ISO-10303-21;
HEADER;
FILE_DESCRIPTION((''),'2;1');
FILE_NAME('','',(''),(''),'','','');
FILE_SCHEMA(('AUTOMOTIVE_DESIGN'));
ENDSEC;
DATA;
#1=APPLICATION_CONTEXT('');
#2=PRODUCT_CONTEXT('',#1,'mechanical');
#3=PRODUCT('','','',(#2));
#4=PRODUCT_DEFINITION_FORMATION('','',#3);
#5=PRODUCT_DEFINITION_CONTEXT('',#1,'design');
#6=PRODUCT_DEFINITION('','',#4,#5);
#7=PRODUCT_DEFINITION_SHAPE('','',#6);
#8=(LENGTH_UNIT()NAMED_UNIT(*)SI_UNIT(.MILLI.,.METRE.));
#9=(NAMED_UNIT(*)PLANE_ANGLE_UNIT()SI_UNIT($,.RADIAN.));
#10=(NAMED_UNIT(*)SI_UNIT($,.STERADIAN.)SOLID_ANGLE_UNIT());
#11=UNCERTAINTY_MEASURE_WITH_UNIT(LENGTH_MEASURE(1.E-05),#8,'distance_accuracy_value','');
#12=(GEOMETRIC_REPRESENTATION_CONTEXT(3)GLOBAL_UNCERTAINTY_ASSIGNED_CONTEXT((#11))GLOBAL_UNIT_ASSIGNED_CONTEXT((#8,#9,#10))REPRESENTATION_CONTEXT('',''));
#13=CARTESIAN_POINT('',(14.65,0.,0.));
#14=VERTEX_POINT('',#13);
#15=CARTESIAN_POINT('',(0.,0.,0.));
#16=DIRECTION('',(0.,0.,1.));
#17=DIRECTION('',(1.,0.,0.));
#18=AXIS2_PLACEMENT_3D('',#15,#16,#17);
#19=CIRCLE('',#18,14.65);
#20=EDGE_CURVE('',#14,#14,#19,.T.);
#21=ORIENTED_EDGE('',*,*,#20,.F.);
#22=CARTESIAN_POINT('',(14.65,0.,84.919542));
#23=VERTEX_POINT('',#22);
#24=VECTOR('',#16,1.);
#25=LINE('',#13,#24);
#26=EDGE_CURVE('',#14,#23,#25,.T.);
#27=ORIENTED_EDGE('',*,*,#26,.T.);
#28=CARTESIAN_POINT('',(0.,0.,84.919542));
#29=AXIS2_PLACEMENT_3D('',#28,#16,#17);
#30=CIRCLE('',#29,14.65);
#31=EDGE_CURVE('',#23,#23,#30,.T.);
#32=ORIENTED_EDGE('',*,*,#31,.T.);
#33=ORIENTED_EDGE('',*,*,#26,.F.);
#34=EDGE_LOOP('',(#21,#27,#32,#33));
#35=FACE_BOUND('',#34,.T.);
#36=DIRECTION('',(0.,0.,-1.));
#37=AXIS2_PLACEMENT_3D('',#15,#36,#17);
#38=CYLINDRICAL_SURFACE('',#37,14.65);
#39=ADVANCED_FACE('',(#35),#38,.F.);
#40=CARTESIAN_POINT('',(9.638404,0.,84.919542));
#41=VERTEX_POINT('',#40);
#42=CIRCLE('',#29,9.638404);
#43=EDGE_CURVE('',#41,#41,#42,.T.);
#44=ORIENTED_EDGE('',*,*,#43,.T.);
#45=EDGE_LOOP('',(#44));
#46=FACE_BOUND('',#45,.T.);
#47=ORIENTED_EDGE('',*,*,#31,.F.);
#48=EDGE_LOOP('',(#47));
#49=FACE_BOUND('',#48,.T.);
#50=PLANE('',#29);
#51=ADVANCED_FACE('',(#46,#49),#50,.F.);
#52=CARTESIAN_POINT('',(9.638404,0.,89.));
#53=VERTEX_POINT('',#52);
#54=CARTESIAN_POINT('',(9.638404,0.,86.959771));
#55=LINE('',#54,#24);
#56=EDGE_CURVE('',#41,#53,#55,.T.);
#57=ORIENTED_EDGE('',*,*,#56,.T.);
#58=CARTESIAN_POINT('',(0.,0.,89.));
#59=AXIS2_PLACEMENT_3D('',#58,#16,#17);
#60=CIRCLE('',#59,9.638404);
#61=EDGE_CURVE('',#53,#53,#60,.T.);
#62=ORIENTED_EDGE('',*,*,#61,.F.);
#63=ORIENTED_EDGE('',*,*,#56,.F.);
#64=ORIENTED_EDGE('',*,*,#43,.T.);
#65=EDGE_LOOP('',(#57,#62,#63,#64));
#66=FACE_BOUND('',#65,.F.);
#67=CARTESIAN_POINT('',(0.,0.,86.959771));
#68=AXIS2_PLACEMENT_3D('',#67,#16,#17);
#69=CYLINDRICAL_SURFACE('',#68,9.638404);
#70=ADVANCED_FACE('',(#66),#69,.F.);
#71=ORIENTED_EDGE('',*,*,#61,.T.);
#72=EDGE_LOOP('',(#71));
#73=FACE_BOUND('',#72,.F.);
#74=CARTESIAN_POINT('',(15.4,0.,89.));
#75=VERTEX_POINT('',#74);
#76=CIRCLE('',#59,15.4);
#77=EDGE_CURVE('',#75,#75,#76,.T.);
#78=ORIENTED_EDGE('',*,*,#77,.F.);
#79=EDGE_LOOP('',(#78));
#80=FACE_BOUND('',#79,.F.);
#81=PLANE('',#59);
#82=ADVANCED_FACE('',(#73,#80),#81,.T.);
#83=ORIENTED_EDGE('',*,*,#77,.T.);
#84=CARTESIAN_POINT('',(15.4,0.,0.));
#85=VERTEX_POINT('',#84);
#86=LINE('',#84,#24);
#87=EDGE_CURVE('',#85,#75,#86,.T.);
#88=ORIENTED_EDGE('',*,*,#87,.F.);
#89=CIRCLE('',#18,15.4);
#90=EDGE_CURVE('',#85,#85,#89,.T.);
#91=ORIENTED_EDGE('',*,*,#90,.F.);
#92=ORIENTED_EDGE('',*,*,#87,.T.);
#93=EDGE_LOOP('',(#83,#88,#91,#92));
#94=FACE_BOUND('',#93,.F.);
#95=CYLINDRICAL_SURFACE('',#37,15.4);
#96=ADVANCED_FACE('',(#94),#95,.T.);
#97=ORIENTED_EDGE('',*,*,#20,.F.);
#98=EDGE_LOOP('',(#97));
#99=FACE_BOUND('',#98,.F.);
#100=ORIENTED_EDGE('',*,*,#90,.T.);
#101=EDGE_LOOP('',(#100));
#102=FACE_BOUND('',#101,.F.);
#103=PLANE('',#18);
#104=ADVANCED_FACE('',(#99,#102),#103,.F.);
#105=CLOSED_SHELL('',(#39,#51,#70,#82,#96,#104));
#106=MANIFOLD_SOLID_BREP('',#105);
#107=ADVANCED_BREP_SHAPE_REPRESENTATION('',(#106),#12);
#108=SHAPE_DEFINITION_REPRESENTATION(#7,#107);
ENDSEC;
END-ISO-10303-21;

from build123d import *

# Parameters (mm, degrees)
F0_R     = 15.4
F0_R_2   = 14.65
F1_DEPTH = 89
F2_W     = 5.0115964577
F2_H     = 4.0804579258


# Not quite as in the source:
# - a feature names something its author has since deleted; it is built from what else it names


with BuildPart() as f1:
    # F0 (on Top) → F1 (new body)
    with BuildSketch(Plane.XY):
        Circle(F0_R)
        Circle(F0_R_2, mode=Mode.SUBTRACT)
    extrude(amount=F1_DEPTH)

    # F2 (on Front) → F3 (revolve)
    with BuildSketch(Plane.XZ):
        with Locations((12.1442017712, 86.9597710371)):
            Rectangle(F2_W, F2_H)
    revolve(axis=Axis((0, 0, 68.6147660017), (0, 0, 1)))


solid = f1.part
